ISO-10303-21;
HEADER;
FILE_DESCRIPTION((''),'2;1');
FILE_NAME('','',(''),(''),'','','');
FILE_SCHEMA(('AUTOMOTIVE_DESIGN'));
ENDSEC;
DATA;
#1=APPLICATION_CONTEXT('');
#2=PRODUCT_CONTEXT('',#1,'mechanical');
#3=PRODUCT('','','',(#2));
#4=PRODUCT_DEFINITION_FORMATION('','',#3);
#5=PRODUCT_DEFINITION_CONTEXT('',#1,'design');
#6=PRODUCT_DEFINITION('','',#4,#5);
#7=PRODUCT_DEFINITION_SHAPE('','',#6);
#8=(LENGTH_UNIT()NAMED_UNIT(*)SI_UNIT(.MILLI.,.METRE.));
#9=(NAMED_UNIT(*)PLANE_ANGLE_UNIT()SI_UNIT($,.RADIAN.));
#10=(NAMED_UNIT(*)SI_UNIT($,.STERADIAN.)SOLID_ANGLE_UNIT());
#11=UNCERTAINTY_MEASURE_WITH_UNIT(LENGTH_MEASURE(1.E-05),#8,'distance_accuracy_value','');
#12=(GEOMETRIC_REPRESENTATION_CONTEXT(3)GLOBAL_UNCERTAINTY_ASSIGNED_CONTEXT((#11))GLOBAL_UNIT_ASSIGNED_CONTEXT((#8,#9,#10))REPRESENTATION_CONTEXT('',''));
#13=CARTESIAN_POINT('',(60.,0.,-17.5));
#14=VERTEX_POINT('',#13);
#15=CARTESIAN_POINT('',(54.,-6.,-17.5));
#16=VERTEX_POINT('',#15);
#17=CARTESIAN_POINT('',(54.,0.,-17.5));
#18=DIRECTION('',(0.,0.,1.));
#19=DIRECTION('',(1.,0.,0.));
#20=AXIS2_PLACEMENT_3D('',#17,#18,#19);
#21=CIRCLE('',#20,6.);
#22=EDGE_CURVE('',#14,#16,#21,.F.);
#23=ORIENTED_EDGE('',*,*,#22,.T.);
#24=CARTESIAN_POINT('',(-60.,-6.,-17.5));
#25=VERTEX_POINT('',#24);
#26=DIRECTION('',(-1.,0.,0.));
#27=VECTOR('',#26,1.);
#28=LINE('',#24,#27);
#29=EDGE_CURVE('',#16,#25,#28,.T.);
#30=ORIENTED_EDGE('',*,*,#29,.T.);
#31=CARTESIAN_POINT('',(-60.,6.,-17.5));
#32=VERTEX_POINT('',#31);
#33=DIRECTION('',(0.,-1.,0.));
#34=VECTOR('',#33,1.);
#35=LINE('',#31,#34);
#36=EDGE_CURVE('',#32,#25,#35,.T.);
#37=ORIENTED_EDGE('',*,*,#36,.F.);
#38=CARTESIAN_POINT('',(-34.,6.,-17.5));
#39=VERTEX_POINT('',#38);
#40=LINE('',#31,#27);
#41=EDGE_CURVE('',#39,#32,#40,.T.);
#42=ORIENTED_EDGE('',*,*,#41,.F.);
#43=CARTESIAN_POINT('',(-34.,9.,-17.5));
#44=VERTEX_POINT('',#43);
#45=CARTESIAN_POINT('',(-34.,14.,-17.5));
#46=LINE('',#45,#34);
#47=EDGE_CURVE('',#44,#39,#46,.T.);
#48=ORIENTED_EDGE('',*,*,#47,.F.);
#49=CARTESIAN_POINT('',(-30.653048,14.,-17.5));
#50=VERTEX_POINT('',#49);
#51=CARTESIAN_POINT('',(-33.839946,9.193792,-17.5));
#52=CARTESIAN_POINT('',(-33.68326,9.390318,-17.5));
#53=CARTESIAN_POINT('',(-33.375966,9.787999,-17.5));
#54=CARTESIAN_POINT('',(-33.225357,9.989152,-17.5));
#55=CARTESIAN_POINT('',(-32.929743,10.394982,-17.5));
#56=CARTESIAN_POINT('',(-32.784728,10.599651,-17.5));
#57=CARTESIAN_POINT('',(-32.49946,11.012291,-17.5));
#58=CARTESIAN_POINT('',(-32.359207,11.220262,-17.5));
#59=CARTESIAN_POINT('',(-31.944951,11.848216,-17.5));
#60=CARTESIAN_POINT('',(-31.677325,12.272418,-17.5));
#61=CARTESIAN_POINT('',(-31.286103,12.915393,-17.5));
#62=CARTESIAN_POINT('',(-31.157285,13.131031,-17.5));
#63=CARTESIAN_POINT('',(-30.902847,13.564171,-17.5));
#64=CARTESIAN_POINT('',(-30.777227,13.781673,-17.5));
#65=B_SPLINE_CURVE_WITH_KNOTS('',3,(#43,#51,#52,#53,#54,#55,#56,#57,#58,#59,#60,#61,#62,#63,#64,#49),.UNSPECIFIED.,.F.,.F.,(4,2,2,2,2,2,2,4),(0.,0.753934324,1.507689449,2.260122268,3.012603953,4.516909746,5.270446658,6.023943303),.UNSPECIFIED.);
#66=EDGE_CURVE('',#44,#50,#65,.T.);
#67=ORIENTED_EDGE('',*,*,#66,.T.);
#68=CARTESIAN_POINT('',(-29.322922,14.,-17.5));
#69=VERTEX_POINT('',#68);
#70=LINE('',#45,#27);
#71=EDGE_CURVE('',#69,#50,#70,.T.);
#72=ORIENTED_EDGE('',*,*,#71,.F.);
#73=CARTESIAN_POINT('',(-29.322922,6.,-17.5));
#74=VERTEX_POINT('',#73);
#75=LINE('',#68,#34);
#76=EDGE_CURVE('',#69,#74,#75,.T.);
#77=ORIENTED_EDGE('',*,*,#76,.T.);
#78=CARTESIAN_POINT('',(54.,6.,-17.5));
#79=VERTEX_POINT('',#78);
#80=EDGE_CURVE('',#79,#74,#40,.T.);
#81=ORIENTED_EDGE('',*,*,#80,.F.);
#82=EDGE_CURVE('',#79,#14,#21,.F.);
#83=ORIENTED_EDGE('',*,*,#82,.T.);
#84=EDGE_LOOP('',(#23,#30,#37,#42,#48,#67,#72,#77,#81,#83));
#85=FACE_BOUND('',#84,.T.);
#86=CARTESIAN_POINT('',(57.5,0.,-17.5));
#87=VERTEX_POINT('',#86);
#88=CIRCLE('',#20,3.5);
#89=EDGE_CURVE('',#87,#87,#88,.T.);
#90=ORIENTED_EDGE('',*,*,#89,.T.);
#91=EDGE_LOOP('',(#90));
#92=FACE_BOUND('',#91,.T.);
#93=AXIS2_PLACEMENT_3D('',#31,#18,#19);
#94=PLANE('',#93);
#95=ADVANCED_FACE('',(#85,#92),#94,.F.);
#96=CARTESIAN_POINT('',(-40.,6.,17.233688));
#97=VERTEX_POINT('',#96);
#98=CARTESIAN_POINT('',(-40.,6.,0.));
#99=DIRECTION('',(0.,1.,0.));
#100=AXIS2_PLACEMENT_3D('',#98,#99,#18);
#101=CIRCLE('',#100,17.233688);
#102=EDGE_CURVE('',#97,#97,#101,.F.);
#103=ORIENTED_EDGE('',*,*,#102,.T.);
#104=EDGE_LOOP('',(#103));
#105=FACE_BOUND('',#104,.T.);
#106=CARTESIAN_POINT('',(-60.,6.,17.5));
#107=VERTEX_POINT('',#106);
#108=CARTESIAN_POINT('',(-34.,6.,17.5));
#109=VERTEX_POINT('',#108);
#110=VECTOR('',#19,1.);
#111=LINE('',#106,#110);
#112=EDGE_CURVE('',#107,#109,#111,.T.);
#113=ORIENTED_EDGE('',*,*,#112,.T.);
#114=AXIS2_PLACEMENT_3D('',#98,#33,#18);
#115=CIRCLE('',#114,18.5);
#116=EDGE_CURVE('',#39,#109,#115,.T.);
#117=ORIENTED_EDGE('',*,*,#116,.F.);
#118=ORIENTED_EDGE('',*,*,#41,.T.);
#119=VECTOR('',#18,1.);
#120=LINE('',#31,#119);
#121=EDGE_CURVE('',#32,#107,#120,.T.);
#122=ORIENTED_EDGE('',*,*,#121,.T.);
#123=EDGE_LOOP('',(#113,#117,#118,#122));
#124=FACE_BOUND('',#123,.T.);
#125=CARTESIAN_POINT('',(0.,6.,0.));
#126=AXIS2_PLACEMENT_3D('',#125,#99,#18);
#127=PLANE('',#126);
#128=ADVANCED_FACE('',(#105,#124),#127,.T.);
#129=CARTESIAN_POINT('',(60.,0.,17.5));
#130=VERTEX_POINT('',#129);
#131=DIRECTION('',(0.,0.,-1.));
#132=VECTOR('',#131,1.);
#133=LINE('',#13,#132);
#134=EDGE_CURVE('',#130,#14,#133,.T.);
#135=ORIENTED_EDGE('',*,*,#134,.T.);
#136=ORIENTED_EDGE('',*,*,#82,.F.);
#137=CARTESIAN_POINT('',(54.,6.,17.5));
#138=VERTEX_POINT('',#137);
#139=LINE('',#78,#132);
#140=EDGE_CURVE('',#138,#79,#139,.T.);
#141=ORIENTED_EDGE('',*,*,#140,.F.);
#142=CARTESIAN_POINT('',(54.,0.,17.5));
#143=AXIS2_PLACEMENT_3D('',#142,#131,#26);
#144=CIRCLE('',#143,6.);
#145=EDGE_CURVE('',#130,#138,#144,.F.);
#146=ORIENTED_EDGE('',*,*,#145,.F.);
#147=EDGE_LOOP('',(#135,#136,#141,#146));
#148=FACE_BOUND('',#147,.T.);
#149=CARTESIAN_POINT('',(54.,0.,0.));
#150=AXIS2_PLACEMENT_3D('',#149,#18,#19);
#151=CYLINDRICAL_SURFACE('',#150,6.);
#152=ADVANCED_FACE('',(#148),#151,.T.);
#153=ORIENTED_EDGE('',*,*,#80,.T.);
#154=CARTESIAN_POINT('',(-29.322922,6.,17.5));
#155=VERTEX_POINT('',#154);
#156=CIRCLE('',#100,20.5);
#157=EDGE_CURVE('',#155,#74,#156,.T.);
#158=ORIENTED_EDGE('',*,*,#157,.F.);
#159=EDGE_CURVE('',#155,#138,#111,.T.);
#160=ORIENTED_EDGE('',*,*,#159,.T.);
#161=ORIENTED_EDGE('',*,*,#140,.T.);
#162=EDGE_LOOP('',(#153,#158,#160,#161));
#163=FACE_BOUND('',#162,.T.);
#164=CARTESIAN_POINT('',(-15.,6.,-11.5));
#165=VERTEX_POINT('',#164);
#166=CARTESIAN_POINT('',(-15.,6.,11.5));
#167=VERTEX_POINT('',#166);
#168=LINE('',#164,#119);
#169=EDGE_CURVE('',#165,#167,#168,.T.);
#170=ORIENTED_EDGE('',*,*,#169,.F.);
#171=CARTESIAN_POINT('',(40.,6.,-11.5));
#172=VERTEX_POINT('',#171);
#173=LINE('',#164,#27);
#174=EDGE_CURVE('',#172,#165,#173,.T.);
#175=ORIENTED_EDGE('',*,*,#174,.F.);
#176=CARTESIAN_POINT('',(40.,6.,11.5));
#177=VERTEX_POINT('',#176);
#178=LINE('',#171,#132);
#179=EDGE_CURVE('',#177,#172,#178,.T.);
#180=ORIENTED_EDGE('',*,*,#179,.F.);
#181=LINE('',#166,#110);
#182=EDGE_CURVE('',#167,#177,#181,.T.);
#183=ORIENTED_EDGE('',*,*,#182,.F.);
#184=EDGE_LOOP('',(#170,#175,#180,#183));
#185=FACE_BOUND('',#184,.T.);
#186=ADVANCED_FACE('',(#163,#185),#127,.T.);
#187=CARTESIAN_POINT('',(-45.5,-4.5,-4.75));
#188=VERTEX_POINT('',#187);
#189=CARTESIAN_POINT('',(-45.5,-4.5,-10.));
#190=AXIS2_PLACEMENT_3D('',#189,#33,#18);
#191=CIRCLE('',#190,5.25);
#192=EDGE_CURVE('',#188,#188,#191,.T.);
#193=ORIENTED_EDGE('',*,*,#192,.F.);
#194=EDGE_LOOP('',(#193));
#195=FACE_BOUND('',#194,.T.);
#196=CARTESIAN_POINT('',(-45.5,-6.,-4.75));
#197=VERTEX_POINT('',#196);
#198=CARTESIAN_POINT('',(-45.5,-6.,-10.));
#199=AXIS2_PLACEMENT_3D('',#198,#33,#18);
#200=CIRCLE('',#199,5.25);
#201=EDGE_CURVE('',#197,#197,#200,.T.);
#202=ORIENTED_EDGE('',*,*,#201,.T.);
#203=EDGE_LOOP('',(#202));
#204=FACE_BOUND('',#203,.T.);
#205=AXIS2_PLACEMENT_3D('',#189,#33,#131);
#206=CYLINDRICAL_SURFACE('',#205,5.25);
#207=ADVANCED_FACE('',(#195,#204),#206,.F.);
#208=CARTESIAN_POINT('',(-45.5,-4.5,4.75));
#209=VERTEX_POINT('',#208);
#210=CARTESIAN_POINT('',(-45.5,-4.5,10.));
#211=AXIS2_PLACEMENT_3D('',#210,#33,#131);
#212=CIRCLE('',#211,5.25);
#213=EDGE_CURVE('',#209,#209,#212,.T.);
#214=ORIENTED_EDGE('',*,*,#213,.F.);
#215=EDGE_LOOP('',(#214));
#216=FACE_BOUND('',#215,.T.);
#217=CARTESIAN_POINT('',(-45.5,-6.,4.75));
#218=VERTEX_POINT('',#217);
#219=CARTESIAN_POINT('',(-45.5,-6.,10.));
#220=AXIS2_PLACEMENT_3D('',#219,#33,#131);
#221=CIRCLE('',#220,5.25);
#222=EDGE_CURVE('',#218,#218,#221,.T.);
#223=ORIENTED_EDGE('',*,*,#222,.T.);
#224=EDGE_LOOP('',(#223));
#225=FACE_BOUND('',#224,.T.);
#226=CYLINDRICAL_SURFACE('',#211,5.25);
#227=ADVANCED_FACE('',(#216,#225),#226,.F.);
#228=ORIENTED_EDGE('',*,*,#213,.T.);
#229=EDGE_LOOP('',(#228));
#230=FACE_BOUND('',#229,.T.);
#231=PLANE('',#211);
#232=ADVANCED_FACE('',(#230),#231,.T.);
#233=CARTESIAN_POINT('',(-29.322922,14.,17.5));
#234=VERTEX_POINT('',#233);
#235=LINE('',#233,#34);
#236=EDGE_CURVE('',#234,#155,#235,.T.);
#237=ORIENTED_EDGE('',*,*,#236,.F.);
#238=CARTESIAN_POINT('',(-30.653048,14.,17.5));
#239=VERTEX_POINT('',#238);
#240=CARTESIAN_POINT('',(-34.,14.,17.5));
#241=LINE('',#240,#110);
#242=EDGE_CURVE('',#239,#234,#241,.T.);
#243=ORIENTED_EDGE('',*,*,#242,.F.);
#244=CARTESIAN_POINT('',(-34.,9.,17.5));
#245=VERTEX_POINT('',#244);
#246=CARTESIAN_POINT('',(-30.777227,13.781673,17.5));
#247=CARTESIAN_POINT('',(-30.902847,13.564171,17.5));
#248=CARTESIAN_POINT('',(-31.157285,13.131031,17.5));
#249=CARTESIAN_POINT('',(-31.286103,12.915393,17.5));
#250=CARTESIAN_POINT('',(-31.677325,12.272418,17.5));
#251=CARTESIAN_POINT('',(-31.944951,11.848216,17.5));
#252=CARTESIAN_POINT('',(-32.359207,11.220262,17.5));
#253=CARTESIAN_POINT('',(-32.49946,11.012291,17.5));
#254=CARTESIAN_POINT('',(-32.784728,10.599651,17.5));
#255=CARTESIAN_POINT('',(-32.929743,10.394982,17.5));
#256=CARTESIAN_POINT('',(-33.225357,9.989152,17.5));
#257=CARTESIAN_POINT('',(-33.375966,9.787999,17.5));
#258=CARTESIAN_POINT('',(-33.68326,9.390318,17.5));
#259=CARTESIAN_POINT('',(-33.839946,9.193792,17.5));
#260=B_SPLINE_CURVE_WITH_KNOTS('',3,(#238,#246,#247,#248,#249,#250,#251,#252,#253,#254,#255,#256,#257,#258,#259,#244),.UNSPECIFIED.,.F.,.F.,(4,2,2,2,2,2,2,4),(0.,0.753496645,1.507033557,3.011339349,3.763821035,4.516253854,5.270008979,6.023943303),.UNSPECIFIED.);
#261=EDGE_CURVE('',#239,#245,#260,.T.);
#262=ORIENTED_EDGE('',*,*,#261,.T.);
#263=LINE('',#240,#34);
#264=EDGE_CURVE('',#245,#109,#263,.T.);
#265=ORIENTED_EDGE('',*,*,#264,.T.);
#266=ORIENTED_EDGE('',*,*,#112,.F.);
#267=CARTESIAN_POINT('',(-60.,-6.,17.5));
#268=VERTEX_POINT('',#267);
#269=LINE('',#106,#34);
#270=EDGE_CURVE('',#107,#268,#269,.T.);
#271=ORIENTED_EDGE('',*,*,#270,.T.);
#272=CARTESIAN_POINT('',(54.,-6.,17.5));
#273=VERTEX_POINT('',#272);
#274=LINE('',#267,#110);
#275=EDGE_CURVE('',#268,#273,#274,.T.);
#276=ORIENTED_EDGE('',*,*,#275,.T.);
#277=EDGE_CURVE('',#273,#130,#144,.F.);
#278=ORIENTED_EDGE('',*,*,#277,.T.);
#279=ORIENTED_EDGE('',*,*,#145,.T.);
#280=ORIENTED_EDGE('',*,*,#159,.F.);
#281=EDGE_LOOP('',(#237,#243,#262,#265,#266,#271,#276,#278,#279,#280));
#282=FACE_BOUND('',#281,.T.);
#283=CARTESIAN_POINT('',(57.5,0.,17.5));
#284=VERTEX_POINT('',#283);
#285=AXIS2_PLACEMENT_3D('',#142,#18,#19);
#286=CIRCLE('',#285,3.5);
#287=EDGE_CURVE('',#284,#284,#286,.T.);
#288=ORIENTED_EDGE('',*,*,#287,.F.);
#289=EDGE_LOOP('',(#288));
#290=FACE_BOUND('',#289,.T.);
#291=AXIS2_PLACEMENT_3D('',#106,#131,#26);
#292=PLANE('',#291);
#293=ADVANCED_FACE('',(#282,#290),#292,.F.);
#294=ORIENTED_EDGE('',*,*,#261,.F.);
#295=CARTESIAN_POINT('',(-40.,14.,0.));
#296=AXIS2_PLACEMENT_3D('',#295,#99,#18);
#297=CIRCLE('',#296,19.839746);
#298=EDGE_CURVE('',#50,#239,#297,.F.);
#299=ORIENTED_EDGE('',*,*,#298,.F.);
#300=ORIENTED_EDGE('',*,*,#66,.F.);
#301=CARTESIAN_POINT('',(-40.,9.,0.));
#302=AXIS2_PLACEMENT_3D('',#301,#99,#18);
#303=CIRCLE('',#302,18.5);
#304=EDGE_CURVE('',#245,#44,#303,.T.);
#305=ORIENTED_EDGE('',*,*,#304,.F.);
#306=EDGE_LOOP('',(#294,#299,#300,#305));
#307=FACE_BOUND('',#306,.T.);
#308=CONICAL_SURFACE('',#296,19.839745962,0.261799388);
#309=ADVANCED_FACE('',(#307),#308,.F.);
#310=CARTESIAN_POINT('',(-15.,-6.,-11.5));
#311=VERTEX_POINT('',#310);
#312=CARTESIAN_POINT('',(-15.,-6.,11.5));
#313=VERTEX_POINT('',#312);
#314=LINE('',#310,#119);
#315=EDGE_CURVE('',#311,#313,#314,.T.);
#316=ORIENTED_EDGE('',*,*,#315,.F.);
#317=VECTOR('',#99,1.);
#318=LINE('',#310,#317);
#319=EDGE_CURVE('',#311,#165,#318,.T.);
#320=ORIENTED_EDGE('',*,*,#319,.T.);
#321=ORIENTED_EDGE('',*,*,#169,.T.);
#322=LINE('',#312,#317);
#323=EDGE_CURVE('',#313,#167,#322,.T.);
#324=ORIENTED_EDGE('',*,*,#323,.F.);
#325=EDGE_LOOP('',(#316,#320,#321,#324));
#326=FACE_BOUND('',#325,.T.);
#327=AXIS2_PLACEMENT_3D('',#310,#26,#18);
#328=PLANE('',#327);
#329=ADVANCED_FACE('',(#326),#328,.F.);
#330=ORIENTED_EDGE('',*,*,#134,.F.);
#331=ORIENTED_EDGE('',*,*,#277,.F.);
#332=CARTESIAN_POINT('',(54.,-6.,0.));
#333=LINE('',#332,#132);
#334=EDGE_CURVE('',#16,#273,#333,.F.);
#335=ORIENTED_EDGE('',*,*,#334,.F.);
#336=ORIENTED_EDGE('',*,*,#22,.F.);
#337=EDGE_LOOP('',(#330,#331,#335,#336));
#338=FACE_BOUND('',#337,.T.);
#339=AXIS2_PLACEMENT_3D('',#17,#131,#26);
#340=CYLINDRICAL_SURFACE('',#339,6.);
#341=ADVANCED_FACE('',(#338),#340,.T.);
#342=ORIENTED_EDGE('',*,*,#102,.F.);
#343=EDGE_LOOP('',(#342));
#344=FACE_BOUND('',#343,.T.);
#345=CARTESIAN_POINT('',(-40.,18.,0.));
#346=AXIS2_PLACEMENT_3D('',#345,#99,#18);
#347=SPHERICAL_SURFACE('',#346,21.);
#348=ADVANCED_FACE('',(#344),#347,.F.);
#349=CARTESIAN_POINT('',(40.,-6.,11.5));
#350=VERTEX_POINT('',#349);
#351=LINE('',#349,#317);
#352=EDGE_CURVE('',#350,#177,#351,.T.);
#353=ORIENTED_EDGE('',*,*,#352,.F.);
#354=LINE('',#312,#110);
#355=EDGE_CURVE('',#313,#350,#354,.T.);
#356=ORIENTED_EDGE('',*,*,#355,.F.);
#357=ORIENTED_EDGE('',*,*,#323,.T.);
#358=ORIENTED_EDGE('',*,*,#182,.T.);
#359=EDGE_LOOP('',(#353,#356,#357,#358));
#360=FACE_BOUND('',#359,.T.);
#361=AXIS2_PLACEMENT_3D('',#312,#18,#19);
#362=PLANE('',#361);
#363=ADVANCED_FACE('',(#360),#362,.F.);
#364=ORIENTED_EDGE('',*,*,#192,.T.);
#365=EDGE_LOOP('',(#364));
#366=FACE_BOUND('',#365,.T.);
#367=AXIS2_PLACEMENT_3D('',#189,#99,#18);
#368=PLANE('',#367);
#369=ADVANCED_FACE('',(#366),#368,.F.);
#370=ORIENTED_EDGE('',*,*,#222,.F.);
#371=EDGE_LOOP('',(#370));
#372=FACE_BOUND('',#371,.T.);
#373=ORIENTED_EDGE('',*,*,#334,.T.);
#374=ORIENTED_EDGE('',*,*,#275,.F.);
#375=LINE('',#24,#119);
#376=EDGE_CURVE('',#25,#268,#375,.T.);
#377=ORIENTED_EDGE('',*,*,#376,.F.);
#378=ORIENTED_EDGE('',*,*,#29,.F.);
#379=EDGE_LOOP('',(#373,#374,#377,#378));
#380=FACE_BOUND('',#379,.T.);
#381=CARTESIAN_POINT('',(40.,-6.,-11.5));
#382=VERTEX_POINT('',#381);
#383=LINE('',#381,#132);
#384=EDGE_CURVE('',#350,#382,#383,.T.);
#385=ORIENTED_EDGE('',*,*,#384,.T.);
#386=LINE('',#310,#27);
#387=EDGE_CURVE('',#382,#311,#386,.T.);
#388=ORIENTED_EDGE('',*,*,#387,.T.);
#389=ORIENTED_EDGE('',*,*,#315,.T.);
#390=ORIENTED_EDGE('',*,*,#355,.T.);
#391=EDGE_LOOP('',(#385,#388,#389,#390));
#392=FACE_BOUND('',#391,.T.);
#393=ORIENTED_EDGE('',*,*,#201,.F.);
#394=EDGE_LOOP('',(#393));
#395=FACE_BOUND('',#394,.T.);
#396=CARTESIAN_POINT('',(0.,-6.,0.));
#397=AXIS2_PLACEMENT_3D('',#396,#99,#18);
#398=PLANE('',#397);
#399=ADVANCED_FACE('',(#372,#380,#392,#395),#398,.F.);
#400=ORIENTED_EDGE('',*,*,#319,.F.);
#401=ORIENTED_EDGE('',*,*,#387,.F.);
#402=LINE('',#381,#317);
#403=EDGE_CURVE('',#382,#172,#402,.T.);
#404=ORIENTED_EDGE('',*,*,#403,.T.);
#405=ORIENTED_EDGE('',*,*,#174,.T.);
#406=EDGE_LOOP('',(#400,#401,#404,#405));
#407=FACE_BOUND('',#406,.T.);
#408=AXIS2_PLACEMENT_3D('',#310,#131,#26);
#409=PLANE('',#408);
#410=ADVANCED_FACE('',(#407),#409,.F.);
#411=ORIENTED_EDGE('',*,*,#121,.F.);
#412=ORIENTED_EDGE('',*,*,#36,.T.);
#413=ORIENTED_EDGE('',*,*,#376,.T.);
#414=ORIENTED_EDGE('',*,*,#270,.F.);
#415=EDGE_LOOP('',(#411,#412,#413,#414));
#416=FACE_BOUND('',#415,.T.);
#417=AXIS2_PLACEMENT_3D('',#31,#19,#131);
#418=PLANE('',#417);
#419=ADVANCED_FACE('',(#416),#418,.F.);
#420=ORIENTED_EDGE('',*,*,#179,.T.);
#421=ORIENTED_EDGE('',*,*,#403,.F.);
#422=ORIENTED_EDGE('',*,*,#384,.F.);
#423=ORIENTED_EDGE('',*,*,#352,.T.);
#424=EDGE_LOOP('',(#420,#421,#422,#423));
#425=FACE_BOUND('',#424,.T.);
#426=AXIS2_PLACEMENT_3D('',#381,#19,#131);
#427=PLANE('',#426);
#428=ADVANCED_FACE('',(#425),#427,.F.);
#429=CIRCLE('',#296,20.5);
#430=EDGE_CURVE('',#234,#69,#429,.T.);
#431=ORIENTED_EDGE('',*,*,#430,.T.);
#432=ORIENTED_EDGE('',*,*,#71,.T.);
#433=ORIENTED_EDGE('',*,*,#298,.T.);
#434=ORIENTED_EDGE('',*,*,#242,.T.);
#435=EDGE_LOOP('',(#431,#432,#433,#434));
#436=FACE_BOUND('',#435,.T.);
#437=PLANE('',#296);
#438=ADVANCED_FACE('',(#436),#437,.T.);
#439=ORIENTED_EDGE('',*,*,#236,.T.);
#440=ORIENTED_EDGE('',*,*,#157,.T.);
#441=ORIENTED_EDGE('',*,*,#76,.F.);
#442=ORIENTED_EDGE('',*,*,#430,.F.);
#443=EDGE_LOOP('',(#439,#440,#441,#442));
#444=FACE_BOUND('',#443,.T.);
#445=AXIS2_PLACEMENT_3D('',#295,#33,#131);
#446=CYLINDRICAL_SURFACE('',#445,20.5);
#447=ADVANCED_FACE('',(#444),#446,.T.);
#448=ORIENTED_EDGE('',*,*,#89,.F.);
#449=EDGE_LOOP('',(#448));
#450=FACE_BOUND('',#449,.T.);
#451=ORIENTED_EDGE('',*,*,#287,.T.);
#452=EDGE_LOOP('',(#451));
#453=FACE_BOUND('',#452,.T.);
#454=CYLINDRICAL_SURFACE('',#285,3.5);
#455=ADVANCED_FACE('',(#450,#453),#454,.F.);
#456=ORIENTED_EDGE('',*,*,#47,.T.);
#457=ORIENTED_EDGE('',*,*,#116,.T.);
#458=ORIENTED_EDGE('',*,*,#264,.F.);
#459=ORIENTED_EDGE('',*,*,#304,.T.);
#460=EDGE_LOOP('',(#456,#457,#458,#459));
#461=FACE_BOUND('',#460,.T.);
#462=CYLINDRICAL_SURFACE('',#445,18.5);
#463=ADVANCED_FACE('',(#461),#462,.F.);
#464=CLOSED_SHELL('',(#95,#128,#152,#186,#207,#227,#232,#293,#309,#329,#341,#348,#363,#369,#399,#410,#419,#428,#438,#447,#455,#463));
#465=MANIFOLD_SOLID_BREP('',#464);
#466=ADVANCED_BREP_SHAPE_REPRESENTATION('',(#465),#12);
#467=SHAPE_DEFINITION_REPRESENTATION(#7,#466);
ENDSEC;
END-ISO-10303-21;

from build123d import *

# Parameters (mm, degrees)
SKETCH1_W             = 120
SKETCH1_H             = 35
BOSS_EXTRUDE1_DEPTH   = 6
FILLET1_R             = 6
F_6_0MM_DOWEL_HOLE1_D = 7
SKETCH5_R             = 5.25
CUT_EXTRUDE1_DEPTH    = 1.5
SKETCH6_W             = 55
SKETCH6_H             = 23
CUT_EXTRUDE2_DEPTH    = 64.641574462
BOSS_EXTRUDE4_DEPTH   = 8
CHAMFER1_SIZE         = 5
CHAMFER1_SIZE2        = 1.339745962


with BuildPart() as part:
    # Sketch1 → Boss-Extrude1 (new, symmetric)
    with BuildSketch(Plane(origin=(0, 0, 0), x_dir=(1, 0, 0), z_dir=(0, 1, 0))):
        Rectangle(SKETCH1_W, SKETCH1_H)
    extrude(amount=BOSS_EXTRUDE1_DEPTH, both=True)

    # Fillet1
    fillet1_edges = [part.edges().sort_by_distance(p)[0] for p in [
        (60, 6, 0),
        (60, -6, 0),
    ]]
    fillet(fillet1_edges, radius=FILLET1_R - 0.0001)  # a hair under: the kernel refuses the full size

    # Sketch2 → Cut-Revolve1 (revolve, cut)
    with BuildSketch(Plane.XY):
        with BuildLine():
            Line((-61, 18), (-19, 18))
            ThreePointArc((-19, 18), (-40, 39), (-61, 18))
        make_face()
    revolve(axis=Axis((-61, 18, 0), (1, 0, 0)), mode=Mode.SUBTRACT)

    # Ø6.0mm Dowel Hole1 (through all)
    with Locations(Plane.XY.offset(17.5)):
        with Locations((54, 0)):
            Hole(F_6_0MM_DOWEL_HOLE1_D / 2)

    # Sketch5 → Cut-Extrude1 (cut)
    with BuildSketch(Plane.XZ.offset(6)):
        with Locations(Location((-45.5, 10, 0), (0, 0, 270))):
            Circle(SKETCH5_R)
        with Locations(Location((-45.5, -10, 0), (0, 0, 90))):
            Circle(SKETCH5_R)
    extrude(amount=-CUT_EXTRUDE1_DEPTH, mode=Mode.SUBTRACT)

    # Sketch6 → Cut-Extrude2 (cut, through all)
    with BuildSketch(Plane(origin=(0, 6, 0), x_dir=(1, 0, 0), z_dir=(0, 1, 0))):
        with Locations((12.5, 0)):
            Rectangle(SKETCH6_W, SKETCH6_H)
    extrude(amount=-CUT_EXTRUDE2_DEPTH, mode=Mode.SUBTRACT)

    # Sketch8 → Boss-Extrude4 (add)
    with BuildSketch(Plane(origin=(0, 6, 0), x_dir=(1, 0, 0), z_dir=(0, 1, 0))):
        with BuildLine():
            Line((-34, 17.5), (-29.322921748, 17.5))
            ThreePointArc((-29.322921748, 17.5), (-19.5, 0), (-29.322921748, -17.5))
            Line((-29.322921748, -17.5), (-34, -17.5))
            ThreePointArc((-34, -17.5), (-21.5, 0), (-34, 17.5))
        make_face()
    extrude(amount=BOSS_EXTRUDE4_DEPTH)

    # Chamfer1
    chamfer1_edges = [part.edges().sort_by_distance(p)[0] for p in [
        (-21.5, 14, 0),
    ]]
    chamfer1_side = [part.faces().sort_by_distance(p)[0] for p in [
        (-21.5, 10, 0),
    ]]
    chamfer(chamfer1_edges, length=CHAMFER1_SIZE, length2=CHAMFER1_SIZE2, reference=chamfer1_side[0])


solid = part.part
